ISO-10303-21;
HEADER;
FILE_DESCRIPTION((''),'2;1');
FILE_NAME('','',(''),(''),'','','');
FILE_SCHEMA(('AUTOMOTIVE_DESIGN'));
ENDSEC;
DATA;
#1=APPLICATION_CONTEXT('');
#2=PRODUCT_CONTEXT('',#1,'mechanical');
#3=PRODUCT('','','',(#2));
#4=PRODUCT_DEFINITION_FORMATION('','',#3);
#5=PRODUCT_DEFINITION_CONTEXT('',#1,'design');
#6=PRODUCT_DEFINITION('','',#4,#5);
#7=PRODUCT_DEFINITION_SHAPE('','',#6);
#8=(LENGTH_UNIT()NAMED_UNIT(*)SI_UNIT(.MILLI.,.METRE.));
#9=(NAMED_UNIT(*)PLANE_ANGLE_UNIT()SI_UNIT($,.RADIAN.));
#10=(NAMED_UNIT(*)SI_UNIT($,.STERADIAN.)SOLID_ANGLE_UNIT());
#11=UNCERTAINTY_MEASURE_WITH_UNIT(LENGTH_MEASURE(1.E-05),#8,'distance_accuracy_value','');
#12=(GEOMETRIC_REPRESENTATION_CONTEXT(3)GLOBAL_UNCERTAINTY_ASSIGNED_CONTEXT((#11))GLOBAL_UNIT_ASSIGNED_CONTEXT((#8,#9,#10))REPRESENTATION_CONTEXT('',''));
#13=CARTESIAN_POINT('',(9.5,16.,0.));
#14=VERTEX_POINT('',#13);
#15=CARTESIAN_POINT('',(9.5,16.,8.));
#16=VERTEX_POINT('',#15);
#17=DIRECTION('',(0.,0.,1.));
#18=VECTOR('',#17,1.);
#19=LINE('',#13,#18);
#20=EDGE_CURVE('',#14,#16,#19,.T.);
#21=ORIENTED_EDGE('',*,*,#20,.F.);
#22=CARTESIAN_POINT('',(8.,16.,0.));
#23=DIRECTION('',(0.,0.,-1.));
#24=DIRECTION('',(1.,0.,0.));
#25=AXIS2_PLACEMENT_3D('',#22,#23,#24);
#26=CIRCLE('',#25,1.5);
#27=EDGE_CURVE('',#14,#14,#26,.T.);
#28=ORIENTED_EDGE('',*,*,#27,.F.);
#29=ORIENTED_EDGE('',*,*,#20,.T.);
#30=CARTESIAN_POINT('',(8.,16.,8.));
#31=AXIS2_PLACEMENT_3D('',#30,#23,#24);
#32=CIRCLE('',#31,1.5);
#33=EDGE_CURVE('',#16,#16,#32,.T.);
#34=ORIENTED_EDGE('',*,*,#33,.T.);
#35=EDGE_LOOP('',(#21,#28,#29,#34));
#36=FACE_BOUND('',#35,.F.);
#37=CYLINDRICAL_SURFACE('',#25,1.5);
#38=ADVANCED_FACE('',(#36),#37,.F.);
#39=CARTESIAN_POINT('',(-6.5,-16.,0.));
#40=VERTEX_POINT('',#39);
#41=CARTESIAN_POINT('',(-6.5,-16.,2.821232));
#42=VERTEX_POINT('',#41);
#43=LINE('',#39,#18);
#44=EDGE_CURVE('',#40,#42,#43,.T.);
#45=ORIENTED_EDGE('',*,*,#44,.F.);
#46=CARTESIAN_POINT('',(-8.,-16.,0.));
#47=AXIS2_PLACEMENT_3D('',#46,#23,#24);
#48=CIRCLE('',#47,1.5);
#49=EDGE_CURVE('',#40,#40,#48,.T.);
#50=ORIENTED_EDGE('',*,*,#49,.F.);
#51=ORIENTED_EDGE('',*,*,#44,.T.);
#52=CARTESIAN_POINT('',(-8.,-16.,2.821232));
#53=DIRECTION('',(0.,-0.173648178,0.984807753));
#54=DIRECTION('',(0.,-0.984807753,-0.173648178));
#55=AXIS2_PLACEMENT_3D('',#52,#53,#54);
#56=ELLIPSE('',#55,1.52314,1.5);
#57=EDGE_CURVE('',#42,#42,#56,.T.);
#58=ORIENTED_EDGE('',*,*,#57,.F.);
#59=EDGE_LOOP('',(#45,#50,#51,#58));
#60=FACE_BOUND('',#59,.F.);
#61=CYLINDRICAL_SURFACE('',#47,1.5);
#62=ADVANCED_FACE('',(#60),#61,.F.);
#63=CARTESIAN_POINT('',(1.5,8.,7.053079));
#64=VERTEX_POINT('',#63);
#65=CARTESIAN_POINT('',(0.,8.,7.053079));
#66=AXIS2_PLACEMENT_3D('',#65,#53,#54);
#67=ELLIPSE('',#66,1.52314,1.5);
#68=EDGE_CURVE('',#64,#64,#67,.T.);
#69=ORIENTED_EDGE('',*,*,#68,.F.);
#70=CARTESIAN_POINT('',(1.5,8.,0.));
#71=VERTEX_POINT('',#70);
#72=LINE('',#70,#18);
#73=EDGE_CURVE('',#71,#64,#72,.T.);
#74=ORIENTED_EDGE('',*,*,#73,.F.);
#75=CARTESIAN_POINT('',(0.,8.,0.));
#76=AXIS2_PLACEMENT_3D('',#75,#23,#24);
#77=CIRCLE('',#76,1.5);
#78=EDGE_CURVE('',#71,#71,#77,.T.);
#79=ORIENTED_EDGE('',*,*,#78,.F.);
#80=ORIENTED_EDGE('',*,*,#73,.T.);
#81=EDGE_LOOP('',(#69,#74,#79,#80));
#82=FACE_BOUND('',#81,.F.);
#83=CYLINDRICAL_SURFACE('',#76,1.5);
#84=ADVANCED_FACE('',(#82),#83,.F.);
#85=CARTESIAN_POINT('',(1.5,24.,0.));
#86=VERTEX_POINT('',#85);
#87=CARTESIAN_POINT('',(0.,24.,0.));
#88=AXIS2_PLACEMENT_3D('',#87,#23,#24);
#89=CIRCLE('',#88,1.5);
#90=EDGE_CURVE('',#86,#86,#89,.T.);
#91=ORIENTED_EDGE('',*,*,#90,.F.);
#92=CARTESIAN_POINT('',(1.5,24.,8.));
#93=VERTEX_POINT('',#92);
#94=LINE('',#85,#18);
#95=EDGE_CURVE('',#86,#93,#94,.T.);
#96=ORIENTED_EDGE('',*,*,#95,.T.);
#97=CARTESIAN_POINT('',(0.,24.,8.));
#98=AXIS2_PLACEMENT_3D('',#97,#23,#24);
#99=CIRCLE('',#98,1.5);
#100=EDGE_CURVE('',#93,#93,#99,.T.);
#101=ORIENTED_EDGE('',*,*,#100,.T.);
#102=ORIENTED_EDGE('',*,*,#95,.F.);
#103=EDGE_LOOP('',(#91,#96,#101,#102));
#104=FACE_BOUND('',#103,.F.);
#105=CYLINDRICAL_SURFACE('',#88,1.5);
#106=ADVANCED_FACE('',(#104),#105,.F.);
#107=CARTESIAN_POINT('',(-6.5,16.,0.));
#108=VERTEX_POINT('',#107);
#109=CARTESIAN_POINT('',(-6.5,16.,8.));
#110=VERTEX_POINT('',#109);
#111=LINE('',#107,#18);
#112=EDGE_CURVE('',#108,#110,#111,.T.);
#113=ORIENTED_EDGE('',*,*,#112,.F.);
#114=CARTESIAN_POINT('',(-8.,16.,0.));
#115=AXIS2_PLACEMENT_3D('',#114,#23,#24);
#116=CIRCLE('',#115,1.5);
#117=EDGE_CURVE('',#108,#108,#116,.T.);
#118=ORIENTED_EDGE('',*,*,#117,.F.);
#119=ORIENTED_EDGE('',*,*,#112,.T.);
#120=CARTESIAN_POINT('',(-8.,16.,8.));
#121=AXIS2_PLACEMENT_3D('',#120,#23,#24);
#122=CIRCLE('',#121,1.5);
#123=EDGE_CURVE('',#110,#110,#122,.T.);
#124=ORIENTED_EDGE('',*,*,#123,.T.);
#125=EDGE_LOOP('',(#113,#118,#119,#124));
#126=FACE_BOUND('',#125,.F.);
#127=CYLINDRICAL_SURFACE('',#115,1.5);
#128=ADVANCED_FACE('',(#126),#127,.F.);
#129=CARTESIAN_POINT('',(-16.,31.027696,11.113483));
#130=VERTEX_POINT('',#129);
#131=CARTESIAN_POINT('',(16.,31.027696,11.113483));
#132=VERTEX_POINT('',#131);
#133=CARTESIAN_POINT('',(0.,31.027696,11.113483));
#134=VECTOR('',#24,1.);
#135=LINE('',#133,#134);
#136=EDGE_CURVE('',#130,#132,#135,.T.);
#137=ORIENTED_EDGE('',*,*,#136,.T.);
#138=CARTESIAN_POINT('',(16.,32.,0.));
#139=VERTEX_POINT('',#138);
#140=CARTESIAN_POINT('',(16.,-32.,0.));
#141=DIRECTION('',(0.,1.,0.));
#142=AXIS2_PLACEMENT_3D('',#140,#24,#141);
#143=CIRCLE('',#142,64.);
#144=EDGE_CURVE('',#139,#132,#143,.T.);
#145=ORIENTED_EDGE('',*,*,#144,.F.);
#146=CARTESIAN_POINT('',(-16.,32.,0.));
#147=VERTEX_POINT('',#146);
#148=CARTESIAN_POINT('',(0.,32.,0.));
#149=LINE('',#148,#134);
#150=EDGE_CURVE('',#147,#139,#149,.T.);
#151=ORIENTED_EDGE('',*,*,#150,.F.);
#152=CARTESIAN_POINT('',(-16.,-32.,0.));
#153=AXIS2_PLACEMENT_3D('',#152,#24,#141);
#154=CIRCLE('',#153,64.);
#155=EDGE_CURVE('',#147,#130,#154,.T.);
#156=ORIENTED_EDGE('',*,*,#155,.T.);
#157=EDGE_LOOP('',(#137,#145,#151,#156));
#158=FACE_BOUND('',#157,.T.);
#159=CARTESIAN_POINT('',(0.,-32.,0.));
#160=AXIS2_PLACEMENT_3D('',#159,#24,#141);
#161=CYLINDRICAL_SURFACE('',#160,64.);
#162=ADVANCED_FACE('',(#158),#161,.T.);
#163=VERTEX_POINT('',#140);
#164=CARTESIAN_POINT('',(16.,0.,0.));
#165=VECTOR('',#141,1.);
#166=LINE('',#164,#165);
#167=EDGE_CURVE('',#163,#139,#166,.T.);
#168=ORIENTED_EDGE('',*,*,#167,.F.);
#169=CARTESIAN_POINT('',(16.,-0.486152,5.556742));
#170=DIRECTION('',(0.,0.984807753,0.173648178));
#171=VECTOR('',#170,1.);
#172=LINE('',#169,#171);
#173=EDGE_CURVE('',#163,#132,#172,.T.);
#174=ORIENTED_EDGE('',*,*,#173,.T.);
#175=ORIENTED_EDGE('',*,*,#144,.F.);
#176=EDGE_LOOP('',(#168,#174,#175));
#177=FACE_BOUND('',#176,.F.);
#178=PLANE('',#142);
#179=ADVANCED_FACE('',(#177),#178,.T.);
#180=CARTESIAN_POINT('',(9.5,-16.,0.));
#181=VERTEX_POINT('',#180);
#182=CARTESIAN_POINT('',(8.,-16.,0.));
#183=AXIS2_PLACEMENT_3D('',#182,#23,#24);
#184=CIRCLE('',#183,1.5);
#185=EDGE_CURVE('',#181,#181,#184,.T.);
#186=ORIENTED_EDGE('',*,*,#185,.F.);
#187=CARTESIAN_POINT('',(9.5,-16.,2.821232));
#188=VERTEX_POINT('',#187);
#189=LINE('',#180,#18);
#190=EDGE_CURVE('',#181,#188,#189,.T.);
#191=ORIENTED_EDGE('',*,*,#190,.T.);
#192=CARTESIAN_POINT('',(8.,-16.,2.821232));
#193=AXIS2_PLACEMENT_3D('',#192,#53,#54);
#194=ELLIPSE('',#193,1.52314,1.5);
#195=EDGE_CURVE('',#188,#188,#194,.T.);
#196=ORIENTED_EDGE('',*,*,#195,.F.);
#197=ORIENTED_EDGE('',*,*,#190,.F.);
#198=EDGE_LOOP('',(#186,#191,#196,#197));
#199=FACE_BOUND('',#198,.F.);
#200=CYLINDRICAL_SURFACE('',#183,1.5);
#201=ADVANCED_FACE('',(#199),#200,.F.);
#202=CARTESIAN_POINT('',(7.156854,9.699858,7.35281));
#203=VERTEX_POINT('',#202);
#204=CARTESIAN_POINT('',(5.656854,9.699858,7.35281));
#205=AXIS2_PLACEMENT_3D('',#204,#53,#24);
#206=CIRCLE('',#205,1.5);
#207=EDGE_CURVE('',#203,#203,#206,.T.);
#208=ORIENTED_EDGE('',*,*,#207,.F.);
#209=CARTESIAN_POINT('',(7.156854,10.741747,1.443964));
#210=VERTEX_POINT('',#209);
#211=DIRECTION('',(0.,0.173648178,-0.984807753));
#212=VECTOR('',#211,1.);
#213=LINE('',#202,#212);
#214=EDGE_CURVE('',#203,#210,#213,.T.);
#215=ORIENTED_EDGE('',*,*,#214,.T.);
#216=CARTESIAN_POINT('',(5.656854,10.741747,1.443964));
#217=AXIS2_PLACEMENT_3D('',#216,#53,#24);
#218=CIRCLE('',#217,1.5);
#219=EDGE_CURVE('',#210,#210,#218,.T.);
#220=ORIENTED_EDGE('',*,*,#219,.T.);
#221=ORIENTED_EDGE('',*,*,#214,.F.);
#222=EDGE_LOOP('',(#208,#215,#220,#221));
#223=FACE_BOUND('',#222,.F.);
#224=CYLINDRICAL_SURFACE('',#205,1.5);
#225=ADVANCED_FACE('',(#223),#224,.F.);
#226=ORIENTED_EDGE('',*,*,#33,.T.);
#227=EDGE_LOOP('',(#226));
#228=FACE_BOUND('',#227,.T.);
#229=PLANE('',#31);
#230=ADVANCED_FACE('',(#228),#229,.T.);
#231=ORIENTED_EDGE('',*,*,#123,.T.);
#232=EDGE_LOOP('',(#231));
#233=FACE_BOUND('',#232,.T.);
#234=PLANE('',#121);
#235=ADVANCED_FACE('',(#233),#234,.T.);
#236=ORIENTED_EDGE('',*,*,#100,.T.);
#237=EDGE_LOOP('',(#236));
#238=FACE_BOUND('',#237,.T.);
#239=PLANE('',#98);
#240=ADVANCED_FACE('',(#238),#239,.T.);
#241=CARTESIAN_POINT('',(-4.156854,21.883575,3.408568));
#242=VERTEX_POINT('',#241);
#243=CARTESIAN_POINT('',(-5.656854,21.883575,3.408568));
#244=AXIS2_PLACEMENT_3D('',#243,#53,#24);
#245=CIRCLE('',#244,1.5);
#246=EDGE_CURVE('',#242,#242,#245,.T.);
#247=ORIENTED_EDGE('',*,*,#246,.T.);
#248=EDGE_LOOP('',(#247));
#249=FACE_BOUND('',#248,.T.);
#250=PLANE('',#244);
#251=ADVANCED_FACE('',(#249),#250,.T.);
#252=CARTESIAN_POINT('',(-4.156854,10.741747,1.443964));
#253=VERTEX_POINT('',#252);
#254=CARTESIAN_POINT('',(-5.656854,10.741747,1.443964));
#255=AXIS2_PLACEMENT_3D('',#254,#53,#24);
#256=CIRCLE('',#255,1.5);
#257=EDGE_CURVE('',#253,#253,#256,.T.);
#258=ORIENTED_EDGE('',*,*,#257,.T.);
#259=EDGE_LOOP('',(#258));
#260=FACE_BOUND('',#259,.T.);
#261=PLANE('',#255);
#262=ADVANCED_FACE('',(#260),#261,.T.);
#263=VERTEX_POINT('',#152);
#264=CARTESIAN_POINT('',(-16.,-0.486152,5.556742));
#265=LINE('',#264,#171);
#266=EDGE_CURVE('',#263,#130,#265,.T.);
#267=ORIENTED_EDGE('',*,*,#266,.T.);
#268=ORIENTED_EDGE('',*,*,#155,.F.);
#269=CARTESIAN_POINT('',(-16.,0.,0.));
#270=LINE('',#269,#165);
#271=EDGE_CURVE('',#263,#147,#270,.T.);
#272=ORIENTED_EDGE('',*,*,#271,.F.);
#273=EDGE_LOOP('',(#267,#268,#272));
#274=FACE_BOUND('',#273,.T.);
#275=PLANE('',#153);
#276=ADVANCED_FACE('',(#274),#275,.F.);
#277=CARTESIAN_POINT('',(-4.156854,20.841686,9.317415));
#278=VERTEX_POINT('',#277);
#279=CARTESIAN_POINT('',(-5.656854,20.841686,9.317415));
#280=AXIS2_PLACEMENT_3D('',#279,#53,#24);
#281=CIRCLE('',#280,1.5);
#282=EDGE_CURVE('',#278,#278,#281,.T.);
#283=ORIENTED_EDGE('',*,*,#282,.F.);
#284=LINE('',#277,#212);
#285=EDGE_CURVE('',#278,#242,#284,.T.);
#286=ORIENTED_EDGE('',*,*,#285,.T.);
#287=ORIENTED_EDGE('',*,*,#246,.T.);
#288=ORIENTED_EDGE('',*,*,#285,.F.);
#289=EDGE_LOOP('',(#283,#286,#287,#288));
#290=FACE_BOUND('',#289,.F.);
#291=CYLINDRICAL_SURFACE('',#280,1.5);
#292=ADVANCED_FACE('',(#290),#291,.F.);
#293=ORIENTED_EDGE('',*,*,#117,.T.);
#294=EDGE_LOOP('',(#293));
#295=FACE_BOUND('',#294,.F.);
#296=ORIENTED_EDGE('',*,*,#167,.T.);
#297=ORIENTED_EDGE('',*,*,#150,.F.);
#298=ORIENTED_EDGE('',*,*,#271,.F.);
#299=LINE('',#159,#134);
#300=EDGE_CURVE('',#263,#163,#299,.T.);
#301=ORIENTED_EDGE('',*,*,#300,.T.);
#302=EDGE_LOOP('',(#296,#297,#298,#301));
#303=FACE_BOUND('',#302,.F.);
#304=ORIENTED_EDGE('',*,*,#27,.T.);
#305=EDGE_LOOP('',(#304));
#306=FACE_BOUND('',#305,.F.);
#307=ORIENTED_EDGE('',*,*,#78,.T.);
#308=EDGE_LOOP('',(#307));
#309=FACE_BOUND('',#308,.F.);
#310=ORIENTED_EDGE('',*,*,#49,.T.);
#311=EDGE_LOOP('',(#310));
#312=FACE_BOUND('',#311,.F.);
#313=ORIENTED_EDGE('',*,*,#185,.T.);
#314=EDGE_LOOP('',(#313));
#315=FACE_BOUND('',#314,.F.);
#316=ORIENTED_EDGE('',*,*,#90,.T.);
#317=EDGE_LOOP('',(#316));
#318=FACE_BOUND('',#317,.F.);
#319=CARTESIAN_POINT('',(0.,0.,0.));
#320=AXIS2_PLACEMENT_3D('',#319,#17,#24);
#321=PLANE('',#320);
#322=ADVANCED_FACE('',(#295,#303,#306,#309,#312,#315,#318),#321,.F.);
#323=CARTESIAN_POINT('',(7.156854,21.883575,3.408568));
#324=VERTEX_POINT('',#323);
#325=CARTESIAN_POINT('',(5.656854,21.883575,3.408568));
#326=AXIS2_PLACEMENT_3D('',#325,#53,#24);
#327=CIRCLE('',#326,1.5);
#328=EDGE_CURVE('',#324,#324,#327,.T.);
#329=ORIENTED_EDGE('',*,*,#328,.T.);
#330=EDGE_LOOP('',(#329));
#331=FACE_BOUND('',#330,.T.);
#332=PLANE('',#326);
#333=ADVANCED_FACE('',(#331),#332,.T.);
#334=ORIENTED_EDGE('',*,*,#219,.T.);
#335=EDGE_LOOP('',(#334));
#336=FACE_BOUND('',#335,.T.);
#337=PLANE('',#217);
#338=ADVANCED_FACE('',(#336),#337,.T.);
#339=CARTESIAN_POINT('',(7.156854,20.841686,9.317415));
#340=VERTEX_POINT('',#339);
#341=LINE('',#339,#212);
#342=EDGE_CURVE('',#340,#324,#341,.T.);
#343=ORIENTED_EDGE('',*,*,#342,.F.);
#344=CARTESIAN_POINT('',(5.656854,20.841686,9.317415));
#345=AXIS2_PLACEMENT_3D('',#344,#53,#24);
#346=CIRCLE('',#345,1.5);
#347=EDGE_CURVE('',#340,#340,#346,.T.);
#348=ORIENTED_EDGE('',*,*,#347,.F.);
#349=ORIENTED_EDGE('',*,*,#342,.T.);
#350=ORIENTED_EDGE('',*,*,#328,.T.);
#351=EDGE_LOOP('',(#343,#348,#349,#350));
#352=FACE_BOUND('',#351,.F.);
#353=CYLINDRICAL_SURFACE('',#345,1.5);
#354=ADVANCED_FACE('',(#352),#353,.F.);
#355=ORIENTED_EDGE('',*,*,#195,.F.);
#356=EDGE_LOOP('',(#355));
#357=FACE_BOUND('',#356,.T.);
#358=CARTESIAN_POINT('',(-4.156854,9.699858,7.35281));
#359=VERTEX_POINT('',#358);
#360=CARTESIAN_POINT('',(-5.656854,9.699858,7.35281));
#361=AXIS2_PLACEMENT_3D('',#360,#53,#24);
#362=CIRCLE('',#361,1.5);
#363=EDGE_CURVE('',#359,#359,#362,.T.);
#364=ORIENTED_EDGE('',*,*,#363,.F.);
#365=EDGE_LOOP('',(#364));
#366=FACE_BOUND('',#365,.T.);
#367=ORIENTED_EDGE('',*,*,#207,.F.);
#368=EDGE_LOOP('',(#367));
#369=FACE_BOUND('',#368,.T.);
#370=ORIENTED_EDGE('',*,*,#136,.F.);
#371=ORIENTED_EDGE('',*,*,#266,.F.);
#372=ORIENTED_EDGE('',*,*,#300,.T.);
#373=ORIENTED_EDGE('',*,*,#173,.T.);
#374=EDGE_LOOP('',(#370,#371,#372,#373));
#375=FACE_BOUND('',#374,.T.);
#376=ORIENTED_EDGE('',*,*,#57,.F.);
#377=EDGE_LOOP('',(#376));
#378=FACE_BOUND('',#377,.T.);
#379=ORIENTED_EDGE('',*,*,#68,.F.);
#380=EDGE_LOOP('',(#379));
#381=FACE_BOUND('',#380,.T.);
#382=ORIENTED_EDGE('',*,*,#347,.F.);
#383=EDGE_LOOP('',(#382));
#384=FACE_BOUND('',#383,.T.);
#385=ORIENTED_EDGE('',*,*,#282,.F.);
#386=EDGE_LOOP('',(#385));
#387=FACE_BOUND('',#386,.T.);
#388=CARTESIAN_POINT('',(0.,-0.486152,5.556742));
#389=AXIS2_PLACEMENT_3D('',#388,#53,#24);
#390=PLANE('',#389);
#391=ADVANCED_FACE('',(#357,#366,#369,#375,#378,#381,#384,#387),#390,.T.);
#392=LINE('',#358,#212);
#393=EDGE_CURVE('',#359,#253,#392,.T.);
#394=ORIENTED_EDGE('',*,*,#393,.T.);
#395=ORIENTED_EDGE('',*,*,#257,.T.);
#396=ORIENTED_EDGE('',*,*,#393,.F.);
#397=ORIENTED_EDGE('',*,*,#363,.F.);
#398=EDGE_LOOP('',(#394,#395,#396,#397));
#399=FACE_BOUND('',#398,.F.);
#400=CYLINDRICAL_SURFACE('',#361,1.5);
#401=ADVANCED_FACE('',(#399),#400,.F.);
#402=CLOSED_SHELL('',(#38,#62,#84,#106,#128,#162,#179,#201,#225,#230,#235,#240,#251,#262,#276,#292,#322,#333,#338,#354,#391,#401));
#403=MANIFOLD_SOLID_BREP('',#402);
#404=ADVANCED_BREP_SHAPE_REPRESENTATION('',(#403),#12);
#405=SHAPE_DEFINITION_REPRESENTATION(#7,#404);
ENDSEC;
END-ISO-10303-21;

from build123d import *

# Parameters (mm, degrees)
F0_W     = 32
F0_H     = 64
F1_ANGLE = 10
F2_R     = 1.5
F3_DEPTH = 6
F4_R     = 1.5
F5_DEPTH = 8


with BuildPart() as f1:
    # F0 (on Top) → F1 (revolve)
    with BuildSketch(Plane.XY):
        Rectangle(F0_W, F0_H)
    revolve(axis=Axis((0, -32, 0), (1, 0, 0)), revolution_arc=F1_ANGLE)

    # F2 (on face) → F3 (cut)
    with BuildSketch(Plane(origin=(0, -0.9649180674, 5.4723222932), x_dir=(1, 0, 0), z_dir=(0, -0.1736481777, 0.984807753))):
        with Locations((-5.6568542495, 22.1430061531)):
            Circle(F2_R)
        with Locations((5.6568542495, 22.1430061531)):
            Circle(F2_R)
        with Locations((5.6568542495, 10.8292976541)):
            Circle(F2_R)
        with Locations((-5.6568542495, 10.8292976541)):
            Circle(F2_R)
    extrude(amount=-F3_DEPTH, mode=Mode.SUBTRACT)

    # F4 (on face) → F5 (cut)
    with BuildSketch(Plane(origin=(0, 0, 0), x_dir=(1, 0, 0), z_dir=(0, 0, -1))):
        with Locations((0, -8)):
            Circle(F4_R)
        with Locations((8, -16)):
            Circle(F4_R)
        with Locations((0, -24)):
            Circle(F4_R)
        with Locations((-8, -16)):
            Circle(F4_R)
        with Locations((-8, 16)):
            Circle(F4_R)
        with Locations((8, 16)):
            Circle(F4_R)
    extrude(amount=-F5_DEPTH, mode=Mode.SUBTRACT)


solid = f1.part
